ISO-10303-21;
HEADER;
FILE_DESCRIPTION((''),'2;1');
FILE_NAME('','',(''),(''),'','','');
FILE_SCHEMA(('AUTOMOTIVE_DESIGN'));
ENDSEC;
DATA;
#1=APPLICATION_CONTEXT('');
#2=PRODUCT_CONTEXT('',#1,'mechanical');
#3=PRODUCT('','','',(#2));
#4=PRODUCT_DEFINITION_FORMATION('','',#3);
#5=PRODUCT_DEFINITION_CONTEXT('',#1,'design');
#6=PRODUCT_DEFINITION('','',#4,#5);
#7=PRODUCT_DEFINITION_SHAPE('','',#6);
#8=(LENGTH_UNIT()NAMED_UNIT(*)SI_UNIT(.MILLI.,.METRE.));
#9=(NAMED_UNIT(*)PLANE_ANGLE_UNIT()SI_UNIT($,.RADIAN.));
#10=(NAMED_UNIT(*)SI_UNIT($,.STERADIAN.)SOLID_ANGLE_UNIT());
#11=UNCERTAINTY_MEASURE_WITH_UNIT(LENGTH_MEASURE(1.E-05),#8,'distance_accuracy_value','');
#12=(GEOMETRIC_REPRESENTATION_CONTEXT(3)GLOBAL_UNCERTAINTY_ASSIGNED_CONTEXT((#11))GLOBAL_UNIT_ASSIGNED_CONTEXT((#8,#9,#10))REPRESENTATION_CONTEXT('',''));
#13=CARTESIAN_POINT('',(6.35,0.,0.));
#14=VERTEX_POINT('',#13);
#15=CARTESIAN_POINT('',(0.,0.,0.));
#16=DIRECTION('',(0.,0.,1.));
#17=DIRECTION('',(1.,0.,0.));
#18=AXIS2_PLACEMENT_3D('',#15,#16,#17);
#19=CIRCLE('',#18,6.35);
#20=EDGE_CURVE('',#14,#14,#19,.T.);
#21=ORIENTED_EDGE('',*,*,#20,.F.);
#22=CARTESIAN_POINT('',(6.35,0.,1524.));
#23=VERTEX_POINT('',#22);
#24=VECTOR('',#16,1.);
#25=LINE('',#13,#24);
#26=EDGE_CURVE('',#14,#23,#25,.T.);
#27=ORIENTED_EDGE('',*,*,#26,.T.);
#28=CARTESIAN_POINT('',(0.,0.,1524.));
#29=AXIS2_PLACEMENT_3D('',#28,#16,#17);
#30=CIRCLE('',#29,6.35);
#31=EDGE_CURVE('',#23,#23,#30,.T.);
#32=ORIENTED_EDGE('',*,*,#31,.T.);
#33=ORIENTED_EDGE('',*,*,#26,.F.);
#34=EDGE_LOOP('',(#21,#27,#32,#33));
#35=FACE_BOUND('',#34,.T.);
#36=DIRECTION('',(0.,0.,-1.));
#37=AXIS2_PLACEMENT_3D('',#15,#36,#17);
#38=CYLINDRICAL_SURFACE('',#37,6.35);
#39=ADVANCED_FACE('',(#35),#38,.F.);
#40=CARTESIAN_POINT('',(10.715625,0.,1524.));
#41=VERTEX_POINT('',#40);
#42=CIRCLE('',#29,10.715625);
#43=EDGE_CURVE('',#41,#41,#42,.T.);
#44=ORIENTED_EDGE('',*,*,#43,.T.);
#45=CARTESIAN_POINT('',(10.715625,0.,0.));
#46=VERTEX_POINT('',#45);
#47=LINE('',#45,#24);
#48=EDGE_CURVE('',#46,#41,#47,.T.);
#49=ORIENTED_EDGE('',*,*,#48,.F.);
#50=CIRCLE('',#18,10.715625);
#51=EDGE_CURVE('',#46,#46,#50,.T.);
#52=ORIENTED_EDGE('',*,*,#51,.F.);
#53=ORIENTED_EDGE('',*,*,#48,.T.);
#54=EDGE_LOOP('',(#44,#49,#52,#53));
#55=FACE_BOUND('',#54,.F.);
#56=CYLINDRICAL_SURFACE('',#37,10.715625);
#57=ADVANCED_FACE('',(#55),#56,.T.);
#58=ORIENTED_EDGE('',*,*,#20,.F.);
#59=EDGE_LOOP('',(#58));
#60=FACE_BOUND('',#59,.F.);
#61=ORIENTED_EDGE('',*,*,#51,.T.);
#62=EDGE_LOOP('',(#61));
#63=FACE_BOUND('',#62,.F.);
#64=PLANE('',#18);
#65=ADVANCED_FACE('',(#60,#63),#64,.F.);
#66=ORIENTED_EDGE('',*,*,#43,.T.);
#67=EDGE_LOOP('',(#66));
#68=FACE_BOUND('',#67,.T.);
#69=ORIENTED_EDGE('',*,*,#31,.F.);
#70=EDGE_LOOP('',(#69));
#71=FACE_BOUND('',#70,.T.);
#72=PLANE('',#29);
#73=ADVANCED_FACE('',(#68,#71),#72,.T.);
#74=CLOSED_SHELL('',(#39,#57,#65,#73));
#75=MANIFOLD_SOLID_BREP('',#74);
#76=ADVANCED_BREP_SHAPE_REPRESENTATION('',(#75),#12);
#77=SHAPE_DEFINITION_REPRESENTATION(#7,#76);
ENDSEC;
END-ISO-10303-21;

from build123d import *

# Parameters (mm, degrees)
F1_R     = 10.715625
F1_R_2   = 6.35
F2_DEPTH = 1524


# Not quite as in the source:
# - a variable given as a bare number and used for a length is read in inches; the dataset says mm whatever the document's units were


with BuildPart() as f2:
    # F1 (on Top) → F2 (new body)
    with BuildSketch(Plane.XY):
        Circle(F1_R)
        Circle(F1_R_2, mode=Mode.SUBTRACT)
    extrude(amount=F2_DEPTH)


solid = f2.part
